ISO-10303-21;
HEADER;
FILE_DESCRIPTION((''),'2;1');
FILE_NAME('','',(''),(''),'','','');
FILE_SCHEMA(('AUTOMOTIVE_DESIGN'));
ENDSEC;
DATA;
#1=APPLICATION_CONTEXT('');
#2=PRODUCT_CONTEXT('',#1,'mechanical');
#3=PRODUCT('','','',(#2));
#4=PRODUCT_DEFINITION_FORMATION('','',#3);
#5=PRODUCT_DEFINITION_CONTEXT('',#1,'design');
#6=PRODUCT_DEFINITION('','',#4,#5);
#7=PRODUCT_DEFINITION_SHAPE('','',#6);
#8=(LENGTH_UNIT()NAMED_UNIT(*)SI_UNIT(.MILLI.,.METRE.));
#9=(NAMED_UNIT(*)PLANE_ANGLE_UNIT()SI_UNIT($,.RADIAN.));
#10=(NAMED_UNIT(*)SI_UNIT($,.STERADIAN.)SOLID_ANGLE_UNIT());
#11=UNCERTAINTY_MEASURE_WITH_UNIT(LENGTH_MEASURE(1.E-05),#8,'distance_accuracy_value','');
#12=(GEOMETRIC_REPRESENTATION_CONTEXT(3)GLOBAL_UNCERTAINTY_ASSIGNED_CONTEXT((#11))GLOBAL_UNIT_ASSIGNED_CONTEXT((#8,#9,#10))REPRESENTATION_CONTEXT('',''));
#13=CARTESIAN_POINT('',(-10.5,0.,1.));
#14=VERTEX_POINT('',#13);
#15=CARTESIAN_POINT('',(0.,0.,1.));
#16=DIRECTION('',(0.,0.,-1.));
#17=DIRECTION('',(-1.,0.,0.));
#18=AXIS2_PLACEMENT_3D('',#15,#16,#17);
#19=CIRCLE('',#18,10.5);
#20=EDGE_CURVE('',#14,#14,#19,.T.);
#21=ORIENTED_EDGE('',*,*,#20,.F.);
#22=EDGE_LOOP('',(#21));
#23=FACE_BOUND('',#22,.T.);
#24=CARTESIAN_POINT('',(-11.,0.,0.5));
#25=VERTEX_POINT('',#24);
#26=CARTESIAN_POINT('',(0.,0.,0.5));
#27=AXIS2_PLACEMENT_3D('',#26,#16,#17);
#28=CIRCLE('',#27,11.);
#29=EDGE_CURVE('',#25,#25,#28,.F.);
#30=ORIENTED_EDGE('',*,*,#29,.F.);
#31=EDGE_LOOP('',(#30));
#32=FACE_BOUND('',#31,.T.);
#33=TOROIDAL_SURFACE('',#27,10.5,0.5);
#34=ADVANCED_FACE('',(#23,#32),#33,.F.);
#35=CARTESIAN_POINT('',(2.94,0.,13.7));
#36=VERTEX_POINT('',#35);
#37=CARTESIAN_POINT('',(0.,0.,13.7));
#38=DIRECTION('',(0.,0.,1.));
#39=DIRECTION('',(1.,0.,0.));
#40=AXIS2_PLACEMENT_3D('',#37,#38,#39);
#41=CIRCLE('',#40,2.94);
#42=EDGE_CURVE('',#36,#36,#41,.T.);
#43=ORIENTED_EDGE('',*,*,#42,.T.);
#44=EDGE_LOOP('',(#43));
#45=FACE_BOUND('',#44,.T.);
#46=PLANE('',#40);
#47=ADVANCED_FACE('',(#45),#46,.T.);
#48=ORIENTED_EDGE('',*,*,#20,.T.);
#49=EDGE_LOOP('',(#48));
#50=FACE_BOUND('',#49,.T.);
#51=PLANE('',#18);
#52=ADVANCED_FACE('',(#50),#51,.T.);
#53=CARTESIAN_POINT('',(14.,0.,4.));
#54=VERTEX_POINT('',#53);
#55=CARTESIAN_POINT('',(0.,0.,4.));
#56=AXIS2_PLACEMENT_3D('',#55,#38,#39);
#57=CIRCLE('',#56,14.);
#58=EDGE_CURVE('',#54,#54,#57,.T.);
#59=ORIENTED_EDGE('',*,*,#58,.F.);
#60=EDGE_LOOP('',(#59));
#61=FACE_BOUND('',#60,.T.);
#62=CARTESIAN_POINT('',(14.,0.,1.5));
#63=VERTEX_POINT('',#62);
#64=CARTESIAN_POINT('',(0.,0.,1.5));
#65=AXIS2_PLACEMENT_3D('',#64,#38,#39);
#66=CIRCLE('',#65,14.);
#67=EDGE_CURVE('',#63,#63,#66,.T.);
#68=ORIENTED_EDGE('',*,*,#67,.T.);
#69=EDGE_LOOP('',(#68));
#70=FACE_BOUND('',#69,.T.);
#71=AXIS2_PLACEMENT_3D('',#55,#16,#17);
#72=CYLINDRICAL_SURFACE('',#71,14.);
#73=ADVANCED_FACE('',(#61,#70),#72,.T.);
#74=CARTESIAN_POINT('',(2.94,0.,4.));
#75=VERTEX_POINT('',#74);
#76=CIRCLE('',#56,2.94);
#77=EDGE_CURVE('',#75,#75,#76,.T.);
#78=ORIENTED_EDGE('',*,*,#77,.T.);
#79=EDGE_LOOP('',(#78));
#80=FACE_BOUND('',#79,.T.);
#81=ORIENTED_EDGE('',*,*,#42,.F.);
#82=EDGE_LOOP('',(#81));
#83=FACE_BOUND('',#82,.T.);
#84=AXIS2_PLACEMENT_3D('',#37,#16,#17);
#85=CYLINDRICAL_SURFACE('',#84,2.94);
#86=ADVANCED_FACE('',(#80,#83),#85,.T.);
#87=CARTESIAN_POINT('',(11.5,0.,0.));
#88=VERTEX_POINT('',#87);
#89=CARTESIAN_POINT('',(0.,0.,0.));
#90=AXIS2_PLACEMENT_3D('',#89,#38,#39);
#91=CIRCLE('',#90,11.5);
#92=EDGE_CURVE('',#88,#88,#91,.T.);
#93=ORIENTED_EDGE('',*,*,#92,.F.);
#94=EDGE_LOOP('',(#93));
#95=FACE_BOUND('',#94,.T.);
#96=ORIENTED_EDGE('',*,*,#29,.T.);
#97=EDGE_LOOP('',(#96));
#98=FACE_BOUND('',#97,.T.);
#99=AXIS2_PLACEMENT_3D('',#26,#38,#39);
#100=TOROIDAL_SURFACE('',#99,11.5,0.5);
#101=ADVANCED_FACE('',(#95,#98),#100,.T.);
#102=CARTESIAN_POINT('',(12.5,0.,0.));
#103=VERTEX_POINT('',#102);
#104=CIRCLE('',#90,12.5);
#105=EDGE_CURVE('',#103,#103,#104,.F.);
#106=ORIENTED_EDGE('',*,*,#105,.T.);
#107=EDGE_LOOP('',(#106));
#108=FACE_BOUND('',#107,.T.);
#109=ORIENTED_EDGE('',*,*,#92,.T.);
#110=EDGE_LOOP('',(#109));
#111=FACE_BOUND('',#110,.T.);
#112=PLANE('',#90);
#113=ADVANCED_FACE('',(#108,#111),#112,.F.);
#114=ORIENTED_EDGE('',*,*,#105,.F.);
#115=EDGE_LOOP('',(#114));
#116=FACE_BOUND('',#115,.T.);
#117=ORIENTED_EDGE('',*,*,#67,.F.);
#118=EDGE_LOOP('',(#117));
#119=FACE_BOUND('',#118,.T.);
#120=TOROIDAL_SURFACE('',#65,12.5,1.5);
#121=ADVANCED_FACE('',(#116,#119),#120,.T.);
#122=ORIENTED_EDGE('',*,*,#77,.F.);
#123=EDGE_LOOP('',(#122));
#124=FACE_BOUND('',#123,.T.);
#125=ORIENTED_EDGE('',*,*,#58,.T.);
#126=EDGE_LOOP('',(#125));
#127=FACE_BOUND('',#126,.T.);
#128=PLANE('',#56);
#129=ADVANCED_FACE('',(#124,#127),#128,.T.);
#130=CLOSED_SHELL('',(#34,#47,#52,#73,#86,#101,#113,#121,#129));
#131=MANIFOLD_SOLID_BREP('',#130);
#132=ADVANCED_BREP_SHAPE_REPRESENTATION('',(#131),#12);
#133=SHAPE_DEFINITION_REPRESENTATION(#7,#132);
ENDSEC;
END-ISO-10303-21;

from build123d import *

# Parameters (mm, degrees)
SKETCH1_R           = 14
BOSS_EXTRUDE1_DEPTH = 4
SKETCH2_R           = 2.94
BOSS_EXTRUDE2_DEPTH = 9.7
SKETCH4_R           = 11
CUT_EXTRUDE1_DEPTH  = 1
FILLET1_R           = 0.5
FILLET2_R           = 1.5


with BuildPart() as part:
    # Sketch1 → Boss-Extrude1 (new body)
    with BuildSketch(Plane.XY):
        Circle(SKETCH1_R)
    extrude(amount=BOSS_EXTRUDE1_DEPTH)

    # Sketch2 → Boss-Extrude2 (add)
    with BuildSketch(Plane.XY.offset(4)):
        Circle(SKETCH2_R)
    extrude(amount=BOSS_EXTRUDE2_DEPTH)

    # Sketch4 → Cut-Extrude1 (cut)
    with BuildSketch(Plane(origin=(0, 0, 0), x_dir=(-1, 0, 0), z_dir=(0, 0, -1))):
        Circle(SKETCH4_R)
    extrude(amount=-CUT_EXTRUDE1_DEPTH, mode=Mode.SUBTRACT)

    # Fillet1
    fillet1_edges = [part.edges().sort_by_distance(p)[0] for p in [
        (11, 0, 1),
        (11, 0, 0),
    ]]
    fillet(fillet1_edges, radius=FILLET1_R - 0.0001)  # a hair under: the kernel refuses the full size

    # Fillet2
    fillet2_edges = [part.edges().sort_by_distance(p)[0] for p in [
        (-14, 0, 0),
    ]]
    fillet(fillet2_edges, radius=FILLET2_R)


solid = part.part
